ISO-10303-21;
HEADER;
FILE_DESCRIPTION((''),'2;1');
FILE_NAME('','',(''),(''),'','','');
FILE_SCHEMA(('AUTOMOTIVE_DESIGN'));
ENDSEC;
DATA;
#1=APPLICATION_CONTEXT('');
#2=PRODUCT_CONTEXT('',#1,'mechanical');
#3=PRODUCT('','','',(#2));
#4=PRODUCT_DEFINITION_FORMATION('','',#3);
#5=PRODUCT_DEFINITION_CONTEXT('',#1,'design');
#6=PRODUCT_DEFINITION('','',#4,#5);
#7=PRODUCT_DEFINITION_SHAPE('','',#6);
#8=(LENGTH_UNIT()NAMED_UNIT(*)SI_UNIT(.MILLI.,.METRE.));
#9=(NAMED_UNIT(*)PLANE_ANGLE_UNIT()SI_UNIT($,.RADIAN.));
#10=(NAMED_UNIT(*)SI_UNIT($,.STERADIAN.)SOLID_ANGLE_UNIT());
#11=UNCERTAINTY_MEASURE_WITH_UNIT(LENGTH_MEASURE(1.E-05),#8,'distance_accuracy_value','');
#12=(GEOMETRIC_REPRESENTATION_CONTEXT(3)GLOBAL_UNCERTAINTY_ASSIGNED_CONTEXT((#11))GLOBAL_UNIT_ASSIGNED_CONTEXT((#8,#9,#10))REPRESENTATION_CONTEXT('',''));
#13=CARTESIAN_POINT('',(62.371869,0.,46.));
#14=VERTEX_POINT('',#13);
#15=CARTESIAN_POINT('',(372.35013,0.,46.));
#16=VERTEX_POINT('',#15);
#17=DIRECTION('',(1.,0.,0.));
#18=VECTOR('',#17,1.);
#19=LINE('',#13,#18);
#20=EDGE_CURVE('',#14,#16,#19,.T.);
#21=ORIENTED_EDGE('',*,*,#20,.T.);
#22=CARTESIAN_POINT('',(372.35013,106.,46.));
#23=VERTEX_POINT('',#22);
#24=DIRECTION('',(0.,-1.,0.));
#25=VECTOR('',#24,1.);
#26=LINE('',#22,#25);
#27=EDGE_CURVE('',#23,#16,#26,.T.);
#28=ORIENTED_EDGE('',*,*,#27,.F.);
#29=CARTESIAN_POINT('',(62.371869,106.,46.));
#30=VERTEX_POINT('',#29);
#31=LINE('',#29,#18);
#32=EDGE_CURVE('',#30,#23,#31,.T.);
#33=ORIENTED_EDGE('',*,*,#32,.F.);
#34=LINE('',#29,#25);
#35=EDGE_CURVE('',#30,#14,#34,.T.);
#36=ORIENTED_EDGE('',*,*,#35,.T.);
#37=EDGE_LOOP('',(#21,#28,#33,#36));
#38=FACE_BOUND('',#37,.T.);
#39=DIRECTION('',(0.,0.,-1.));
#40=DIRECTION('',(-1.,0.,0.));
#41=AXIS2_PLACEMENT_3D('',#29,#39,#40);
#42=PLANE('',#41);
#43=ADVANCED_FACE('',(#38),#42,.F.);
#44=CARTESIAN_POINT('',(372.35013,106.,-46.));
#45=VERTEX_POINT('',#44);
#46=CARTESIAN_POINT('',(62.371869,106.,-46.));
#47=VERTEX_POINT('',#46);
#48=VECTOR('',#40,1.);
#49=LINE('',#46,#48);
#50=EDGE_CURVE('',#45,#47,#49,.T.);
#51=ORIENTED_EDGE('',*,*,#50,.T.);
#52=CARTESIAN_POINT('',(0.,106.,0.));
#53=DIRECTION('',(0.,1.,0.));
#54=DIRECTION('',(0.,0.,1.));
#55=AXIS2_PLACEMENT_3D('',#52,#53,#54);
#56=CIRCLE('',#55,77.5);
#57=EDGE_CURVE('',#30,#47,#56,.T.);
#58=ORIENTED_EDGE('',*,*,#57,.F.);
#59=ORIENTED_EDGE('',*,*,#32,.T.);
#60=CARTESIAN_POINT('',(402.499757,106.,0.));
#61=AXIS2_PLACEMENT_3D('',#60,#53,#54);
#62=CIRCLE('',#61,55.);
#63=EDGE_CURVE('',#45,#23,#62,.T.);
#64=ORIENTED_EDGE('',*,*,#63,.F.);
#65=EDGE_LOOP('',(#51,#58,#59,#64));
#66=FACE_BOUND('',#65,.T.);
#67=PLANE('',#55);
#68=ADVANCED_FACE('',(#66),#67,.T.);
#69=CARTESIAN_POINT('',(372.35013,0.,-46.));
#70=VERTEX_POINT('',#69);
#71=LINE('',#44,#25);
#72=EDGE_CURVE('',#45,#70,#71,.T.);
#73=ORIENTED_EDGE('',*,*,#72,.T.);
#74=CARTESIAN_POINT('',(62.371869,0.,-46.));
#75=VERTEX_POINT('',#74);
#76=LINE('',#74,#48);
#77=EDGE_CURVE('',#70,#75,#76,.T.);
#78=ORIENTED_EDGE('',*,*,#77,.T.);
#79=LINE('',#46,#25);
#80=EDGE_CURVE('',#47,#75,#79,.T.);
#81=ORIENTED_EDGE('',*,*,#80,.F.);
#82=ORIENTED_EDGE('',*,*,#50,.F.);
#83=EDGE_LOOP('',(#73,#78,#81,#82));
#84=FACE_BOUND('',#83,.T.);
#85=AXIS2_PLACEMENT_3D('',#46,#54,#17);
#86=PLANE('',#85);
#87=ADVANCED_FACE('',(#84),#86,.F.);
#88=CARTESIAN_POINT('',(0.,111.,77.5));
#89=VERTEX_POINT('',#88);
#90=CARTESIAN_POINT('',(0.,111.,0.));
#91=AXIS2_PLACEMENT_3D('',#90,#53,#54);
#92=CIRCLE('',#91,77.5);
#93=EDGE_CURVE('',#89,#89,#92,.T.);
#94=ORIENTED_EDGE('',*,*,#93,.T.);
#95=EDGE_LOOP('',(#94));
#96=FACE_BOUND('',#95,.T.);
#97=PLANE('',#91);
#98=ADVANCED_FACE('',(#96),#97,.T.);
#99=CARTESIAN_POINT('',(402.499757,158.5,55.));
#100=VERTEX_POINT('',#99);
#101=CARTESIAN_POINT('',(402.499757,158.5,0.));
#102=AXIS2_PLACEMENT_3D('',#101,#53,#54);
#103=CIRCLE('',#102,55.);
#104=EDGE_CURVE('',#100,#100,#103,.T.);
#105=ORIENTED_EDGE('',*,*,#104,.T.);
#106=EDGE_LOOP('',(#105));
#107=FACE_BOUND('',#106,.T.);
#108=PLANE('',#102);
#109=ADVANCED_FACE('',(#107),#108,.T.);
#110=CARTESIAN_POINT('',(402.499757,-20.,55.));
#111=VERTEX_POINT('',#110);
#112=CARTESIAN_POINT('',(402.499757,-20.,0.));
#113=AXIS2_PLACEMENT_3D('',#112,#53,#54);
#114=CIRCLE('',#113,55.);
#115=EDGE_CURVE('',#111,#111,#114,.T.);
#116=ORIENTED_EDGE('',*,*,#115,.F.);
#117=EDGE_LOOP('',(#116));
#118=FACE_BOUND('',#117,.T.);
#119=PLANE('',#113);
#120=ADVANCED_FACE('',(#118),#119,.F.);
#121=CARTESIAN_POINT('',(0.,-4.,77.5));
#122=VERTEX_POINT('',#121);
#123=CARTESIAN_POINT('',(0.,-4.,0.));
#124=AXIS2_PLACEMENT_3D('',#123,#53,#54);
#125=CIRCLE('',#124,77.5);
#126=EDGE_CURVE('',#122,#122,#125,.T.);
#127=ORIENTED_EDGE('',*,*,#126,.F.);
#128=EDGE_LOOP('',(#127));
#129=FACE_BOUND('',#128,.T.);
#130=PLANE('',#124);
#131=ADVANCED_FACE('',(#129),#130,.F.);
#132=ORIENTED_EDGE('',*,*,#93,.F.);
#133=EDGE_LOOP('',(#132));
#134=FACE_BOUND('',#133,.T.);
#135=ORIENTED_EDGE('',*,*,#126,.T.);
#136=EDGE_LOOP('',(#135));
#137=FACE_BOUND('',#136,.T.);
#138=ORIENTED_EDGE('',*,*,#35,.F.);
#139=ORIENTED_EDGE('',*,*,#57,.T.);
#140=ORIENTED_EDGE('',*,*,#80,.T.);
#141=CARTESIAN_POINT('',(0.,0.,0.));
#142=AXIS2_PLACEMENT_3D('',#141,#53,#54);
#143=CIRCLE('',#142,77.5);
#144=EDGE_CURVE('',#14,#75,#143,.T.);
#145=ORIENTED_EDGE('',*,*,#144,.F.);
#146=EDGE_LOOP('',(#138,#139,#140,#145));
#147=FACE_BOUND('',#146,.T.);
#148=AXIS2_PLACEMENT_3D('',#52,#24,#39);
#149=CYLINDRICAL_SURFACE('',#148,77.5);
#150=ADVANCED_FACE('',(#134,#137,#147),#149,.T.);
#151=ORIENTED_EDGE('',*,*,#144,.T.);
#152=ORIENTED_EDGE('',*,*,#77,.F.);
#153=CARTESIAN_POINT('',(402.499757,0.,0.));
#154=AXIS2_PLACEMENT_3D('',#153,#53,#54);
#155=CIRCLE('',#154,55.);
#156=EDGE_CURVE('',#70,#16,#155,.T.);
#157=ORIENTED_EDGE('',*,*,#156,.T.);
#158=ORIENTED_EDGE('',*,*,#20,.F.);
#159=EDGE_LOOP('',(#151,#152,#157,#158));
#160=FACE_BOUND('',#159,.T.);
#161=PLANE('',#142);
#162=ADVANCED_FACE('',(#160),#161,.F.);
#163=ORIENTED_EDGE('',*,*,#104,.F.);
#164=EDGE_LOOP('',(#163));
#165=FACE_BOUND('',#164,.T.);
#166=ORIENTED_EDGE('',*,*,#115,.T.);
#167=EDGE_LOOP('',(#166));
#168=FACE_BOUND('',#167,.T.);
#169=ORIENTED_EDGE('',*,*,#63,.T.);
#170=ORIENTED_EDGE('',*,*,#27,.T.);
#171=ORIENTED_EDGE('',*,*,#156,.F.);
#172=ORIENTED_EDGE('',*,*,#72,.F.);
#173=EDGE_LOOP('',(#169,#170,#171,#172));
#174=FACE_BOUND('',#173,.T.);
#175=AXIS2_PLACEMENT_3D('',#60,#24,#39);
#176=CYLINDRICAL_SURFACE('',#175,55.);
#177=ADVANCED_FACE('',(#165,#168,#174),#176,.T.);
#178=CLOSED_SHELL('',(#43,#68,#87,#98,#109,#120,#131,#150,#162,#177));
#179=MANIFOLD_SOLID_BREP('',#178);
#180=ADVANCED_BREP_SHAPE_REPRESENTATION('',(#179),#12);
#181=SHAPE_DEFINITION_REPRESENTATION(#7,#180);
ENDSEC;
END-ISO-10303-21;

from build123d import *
from build123d.topology import SkipClean

# Parameters (mm, degrees)
SALIENTE_EXTRUIR1_DEPTH      = 106
SALIENTE_EXTRUIR2_DEPTH      = 5
SALIENTE_EXTRUIR2_DEPTH_BACK = 110
CROQUIS2_R                   = 77.5
SALIENTE_EXTRUIR3_DEPTH      = 52.5
SALIENTE_EXTRUIR3_DEPTH_BACK = 126
CROQUIS3_R                   = 55


with BuildPart() as part:
    # Croquis1 → Saliente-Extruir1 (new body)
    with BuildSketch(Plane(origin=(0, 0, 0), x_dir=(1, 0, 0), z_dir=(0, 1, 0))):
        with BuildLine():
            Line((62.371868659, 46), (372.350129794, 46))
            ThreePointArc((372.350129794, 46), (457.499756657, 0), (372.350129794, -46))
            Line((372.350129794, -46), (62.371868659, -46))
            ThreePointArc((62.371868659, -46), (-77.5, 0), (62.371868659, 46))
        make_face()
    extrude(amount=SALIENTE_EXTRUIR1_DEPTH)

    # Croquis2 → Saliente-Extruir2 (add, two sides: drawn at the far end of the back side and taken through both)
    with SkipClean():  # the faces are left unmerged after this step: merging them gives an invalid solid
        with BuildSketch(Plane(origin=(0, 106, 0), x_dir=(1, 0, 0), z_dir=(0, 1, 0)).offset(-SALIENTE_EXTRUIR2_DEPTH_BACK)):
            Circle(CROQUIS2_R)
        extrude(amount=SALIENTE_EXTRUIR2_DEPTH + SALIENTE_EXTRUIR2_DEPTH_BACK)
    add(part.part.scale(1), mode=Mode.REPLACE)  # the faces are merged on a copy

    # Croquis3 → Saliente-Extruir3 (add, two sides: drawn at the far end of the back side and taken through both)
    with SkipClean():  # the faces are left unmerged after this step: merging them gives an invalid solid
        with BuildSketch(Plane(origin=(0, 106, 0), x_dir=(1, 0, 0), z_dir=(0, 1, 0)).offset(-SALIENTE_EXTRUIR3_DEPTH_BACK)):
            with Locations((402.499756657, 0)):
                Circle(CROQUIS3_R)
        extrude(amount=SALIENTE_EXTRUIR3_DEPTH + SALIENTE_EXTRUIR3_DEPTH_BACK)
    add(part.part.scale(1), mode=Mode.REPLACE)  # the faces are merged on a copy


solid = part.part
